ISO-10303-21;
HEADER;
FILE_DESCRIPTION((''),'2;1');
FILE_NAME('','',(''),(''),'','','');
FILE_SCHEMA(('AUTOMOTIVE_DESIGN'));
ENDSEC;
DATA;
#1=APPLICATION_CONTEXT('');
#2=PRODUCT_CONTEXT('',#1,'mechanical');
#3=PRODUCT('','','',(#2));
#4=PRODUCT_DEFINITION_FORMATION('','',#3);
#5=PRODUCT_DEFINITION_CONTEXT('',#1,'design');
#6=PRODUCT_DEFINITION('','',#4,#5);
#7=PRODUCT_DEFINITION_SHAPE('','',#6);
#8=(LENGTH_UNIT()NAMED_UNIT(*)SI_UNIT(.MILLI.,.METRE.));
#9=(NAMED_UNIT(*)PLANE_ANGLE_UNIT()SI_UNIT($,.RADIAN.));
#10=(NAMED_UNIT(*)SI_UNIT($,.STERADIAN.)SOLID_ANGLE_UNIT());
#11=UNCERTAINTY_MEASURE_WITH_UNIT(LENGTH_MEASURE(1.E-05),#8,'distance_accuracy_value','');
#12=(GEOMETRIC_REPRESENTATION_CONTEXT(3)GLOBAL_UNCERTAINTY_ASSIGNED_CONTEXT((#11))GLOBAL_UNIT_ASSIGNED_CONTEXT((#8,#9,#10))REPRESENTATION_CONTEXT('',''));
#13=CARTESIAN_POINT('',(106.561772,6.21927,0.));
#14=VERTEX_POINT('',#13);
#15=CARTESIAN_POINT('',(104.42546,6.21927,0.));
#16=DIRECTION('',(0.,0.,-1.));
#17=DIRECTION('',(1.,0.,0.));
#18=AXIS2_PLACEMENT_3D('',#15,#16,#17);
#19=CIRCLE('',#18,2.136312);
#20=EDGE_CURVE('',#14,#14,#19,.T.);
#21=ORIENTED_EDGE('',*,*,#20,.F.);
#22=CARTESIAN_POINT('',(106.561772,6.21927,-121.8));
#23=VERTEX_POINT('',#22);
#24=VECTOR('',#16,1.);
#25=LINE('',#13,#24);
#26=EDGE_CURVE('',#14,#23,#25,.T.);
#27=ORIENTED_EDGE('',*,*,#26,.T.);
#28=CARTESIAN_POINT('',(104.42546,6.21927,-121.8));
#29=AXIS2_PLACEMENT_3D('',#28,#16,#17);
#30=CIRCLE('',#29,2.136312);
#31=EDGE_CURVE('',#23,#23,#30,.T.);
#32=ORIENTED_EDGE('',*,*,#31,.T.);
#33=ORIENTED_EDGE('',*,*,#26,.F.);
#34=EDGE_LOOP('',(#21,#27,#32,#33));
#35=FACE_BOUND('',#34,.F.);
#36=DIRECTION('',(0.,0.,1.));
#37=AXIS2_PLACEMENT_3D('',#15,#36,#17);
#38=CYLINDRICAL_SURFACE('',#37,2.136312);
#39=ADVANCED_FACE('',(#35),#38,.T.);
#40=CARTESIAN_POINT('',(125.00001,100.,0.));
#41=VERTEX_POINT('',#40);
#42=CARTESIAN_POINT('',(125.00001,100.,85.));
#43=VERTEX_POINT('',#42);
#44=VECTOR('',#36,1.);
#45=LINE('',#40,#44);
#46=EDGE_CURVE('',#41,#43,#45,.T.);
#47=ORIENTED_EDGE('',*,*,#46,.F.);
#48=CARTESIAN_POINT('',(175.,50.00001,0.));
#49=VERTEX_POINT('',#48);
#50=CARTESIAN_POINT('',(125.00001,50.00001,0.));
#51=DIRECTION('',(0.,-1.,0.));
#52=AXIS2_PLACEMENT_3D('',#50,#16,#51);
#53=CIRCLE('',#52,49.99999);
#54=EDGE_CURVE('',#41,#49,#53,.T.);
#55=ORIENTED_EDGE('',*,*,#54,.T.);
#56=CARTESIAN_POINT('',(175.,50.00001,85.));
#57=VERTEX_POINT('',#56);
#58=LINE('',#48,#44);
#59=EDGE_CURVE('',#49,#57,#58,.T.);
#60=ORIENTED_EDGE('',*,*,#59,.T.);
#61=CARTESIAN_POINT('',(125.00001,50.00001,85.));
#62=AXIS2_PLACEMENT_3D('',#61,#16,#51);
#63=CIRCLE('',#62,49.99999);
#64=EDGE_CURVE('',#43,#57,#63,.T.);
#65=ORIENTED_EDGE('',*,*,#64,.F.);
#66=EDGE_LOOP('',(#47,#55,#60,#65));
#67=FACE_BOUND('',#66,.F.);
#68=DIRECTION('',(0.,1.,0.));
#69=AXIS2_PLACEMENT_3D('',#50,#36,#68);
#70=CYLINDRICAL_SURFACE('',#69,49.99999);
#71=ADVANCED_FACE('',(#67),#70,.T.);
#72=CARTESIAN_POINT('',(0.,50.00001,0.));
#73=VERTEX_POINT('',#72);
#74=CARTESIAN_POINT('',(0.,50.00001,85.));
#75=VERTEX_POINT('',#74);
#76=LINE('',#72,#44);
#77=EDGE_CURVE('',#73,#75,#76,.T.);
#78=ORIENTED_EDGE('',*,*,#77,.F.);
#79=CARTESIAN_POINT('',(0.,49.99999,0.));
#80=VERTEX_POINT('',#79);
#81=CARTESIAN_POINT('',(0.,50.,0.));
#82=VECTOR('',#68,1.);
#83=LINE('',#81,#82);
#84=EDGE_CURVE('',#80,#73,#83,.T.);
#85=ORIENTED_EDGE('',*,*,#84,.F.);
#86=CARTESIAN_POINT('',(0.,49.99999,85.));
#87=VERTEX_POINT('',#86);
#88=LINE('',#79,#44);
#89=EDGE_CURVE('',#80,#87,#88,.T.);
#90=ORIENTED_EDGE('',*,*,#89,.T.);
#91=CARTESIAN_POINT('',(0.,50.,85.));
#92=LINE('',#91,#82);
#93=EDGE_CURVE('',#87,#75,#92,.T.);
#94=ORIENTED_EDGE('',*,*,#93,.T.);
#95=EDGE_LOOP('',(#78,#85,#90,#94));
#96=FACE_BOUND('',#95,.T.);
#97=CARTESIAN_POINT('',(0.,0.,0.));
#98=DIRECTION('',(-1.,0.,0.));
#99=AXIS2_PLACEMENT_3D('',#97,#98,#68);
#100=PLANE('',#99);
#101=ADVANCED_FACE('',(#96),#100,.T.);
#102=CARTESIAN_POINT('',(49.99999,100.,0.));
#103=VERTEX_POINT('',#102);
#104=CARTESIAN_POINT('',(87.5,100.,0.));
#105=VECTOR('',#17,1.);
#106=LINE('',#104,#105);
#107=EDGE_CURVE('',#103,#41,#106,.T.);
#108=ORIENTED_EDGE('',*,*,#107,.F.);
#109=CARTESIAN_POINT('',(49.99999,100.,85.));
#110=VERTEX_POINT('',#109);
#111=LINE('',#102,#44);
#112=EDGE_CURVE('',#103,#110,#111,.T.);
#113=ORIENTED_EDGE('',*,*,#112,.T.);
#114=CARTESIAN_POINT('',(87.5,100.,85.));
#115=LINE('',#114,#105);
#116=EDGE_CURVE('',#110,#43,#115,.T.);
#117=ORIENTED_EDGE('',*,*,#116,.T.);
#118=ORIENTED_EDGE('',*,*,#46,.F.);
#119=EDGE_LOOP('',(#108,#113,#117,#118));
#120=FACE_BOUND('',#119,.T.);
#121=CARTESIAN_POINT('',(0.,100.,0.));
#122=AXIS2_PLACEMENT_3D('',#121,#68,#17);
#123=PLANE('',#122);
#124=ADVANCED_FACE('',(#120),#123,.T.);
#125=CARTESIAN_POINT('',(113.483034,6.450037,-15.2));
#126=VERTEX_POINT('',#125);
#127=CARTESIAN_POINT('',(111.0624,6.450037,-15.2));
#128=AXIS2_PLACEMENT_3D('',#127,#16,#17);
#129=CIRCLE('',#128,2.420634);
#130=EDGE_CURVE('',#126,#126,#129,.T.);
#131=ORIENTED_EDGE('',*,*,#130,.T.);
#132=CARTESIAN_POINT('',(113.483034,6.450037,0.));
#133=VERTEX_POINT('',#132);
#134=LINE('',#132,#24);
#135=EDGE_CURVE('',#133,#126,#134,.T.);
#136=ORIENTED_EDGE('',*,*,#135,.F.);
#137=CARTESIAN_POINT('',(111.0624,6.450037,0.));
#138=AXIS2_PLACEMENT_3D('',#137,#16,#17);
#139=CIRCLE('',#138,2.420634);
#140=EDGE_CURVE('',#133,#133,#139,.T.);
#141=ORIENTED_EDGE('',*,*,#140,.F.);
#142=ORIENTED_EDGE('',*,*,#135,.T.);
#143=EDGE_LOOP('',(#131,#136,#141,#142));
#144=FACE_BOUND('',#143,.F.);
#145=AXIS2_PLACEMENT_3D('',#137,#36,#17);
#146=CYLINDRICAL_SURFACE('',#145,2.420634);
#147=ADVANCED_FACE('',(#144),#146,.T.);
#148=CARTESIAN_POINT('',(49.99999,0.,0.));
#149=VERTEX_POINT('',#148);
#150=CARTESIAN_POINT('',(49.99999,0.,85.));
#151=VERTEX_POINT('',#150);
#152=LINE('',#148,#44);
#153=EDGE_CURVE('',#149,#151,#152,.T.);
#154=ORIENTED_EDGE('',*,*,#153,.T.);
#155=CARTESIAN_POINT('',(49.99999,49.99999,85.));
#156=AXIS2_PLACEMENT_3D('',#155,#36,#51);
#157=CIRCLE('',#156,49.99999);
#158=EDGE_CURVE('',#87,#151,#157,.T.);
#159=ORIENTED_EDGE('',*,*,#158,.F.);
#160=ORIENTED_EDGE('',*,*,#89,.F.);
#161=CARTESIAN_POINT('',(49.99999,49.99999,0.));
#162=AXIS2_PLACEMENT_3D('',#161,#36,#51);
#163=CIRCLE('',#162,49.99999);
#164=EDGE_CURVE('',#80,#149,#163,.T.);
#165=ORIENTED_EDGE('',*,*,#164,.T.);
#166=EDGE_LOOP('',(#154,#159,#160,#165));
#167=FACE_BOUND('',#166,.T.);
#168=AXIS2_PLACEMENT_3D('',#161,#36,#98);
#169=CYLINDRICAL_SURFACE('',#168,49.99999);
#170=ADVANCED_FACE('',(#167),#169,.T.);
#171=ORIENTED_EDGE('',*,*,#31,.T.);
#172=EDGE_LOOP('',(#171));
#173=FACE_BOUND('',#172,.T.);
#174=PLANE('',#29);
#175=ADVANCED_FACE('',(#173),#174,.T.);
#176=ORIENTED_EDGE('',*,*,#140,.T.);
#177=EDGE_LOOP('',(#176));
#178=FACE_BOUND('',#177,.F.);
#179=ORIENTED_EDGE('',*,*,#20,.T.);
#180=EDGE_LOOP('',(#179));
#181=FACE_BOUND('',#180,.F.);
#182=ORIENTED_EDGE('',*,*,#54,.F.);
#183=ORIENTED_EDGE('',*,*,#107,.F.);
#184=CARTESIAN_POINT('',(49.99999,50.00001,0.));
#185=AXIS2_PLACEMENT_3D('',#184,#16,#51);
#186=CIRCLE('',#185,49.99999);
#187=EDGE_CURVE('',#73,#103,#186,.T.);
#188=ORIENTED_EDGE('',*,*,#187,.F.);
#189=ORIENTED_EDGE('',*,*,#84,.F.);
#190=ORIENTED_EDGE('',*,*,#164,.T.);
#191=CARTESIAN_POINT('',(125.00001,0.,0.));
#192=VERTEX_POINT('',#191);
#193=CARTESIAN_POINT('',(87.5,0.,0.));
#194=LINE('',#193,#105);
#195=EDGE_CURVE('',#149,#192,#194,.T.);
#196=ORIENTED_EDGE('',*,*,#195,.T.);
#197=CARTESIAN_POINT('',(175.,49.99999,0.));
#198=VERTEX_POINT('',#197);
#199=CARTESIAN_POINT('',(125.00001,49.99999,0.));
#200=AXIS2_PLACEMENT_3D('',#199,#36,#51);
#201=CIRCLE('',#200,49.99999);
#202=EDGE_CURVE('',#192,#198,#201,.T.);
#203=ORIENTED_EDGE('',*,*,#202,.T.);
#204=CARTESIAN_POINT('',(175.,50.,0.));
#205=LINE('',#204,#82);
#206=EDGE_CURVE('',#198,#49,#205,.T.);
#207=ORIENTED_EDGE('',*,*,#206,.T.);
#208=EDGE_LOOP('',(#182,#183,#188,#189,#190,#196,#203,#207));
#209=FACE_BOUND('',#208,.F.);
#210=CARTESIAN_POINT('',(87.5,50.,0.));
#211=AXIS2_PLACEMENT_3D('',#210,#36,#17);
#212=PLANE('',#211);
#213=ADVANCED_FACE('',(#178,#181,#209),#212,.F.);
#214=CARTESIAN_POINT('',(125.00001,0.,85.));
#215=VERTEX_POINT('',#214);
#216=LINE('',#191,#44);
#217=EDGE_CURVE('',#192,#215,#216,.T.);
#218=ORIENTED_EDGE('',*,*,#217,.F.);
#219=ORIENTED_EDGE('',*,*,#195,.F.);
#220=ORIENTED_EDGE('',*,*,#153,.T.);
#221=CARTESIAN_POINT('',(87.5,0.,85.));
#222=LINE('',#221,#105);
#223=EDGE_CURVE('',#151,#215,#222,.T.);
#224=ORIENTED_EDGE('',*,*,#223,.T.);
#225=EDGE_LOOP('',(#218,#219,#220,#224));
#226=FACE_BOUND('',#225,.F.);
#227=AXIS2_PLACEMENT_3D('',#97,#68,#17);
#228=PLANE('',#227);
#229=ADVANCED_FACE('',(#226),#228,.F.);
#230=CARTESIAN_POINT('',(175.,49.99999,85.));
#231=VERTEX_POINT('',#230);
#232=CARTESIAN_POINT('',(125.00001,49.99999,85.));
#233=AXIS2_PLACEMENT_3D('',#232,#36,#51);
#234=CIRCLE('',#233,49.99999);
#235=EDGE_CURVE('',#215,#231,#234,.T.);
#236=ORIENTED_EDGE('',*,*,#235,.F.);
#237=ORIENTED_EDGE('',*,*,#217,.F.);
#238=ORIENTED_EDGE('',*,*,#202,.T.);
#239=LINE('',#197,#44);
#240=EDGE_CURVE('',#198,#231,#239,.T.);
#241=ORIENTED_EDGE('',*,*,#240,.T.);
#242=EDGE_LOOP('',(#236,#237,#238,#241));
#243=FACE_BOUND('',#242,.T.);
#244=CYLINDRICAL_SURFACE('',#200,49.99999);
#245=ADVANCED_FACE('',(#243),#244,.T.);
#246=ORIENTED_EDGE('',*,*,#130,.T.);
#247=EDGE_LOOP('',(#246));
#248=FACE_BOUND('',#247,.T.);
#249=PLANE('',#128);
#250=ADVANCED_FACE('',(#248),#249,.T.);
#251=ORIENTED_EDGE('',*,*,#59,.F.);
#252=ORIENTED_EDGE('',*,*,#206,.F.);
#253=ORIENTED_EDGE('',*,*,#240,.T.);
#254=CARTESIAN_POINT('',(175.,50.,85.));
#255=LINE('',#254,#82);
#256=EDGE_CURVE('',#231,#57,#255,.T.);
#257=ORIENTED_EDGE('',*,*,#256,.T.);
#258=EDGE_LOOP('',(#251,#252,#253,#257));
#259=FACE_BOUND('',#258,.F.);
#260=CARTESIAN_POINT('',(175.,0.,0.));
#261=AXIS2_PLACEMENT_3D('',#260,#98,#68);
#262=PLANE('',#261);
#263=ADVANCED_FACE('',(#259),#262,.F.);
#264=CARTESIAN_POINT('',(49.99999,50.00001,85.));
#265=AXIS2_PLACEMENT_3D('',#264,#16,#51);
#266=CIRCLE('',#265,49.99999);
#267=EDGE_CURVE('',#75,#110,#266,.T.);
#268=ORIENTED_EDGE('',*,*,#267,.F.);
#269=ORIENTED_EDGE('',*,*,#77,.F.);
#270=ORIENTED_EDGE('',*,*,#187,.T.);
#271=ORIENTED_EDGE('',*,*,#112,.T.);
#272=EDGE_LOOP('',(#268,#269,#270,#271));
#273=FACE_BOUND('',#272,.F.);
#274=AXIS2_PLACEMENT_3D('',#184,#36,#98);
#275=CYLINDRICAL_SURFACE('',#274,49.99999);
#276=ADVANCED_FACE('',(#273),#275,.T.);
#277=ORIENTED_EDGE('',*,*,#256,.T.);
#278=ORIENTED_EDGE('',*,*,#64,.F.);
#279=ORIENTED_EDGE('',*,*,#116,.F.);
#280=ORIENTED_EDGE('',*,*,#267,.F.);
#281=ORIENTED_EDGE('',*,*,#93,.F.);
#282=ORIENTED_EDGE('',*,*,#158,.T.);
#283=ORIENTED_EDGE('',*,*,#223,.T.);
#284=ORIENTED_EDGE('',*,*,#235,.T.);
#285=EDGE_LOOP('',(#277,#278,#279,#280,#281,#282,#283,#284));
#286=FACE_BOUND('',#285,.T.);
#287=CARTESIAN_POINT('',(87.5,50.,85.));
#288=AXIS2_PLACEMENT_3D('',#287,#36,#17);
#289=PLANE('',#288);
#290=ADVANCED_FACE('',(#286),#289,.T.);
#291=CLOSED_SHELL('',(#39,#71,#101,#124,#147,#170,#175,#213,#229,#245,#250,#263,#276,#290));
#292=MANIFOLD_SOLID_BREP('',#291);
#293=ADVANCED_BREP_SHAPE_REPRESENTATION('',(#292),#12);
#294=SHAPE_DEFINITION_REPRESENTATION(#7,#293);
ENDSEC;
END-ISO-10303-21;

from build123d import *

# Parameters (mm, degrees)
F0_W     = 175
F0_H     = 100
F1_DEPTH = 85
F2_R     = 49.99999
F3_R     = 49.99999
F6_R     = 2.4206343252
F7_DEPTH = 15.2
F8_R     = 2.136311852
F9_DEPTH = 121.8


# Not quite as in the source:
# - a fillet or chamfer is up to 0.001 mm smaller than in the source, because OpenCascade refuses the exact size
# - the program builds the solid bodies; features that only make, move or delete a surface that nothing else refers to are left out


with BuildPart() as f1:
    # F0 (on Top) → F1 (new body)
    with BuildSketch(Plane.XY):
        with Locations((87.5, 50)):
            Rectangle(F0_W, F0_H)
    extrude(amount=F1_DEPTH)

    # F2 (radius 50 in the source; OpenCascade refuses exactly that, so slightly less here)
    f2_edges = [f1.edges().sort_by_distance(p)[0] for p in [
        (0, 0, 42.5),
        (0, 100, 42.5),
    ]]
    fillet(f2_edges, radius=F2_R)

    # F3 (radius 50 in the source; OpenCascade refuses exactly that, so slightly less here)
    f3_edges = [f1.edges().sort_by_distance(p)[0] for p in [
        (175, 100, 42.5),
        (175, 0, 42.5),
    ]]
    fillet(f3_edges, radius=F3_R)

    # F6 (on face) → F7 (join)
    with BuildSketch(Plane(origin=(0, 0, 0), x_dir=(1, 0, 0), z_dir=(0, 0, -1))):
        with Locations((111.062400043, -6.450037472)):
            Circle(F6_R)
    extrude(amount=F7_DEPTH)

    # F8 (on face) → F9 (join)
    with BuildSketch(Plane(origin=(0, 0, 0), x_dir=(1, 0, 0), z_dir=(0, 0, -1))):
        with Locations((104.4254601002, -6.2192697078)):
            Circle(F8_R)
    extrude(amount=F9_DEPTH)


solid = f1.part
